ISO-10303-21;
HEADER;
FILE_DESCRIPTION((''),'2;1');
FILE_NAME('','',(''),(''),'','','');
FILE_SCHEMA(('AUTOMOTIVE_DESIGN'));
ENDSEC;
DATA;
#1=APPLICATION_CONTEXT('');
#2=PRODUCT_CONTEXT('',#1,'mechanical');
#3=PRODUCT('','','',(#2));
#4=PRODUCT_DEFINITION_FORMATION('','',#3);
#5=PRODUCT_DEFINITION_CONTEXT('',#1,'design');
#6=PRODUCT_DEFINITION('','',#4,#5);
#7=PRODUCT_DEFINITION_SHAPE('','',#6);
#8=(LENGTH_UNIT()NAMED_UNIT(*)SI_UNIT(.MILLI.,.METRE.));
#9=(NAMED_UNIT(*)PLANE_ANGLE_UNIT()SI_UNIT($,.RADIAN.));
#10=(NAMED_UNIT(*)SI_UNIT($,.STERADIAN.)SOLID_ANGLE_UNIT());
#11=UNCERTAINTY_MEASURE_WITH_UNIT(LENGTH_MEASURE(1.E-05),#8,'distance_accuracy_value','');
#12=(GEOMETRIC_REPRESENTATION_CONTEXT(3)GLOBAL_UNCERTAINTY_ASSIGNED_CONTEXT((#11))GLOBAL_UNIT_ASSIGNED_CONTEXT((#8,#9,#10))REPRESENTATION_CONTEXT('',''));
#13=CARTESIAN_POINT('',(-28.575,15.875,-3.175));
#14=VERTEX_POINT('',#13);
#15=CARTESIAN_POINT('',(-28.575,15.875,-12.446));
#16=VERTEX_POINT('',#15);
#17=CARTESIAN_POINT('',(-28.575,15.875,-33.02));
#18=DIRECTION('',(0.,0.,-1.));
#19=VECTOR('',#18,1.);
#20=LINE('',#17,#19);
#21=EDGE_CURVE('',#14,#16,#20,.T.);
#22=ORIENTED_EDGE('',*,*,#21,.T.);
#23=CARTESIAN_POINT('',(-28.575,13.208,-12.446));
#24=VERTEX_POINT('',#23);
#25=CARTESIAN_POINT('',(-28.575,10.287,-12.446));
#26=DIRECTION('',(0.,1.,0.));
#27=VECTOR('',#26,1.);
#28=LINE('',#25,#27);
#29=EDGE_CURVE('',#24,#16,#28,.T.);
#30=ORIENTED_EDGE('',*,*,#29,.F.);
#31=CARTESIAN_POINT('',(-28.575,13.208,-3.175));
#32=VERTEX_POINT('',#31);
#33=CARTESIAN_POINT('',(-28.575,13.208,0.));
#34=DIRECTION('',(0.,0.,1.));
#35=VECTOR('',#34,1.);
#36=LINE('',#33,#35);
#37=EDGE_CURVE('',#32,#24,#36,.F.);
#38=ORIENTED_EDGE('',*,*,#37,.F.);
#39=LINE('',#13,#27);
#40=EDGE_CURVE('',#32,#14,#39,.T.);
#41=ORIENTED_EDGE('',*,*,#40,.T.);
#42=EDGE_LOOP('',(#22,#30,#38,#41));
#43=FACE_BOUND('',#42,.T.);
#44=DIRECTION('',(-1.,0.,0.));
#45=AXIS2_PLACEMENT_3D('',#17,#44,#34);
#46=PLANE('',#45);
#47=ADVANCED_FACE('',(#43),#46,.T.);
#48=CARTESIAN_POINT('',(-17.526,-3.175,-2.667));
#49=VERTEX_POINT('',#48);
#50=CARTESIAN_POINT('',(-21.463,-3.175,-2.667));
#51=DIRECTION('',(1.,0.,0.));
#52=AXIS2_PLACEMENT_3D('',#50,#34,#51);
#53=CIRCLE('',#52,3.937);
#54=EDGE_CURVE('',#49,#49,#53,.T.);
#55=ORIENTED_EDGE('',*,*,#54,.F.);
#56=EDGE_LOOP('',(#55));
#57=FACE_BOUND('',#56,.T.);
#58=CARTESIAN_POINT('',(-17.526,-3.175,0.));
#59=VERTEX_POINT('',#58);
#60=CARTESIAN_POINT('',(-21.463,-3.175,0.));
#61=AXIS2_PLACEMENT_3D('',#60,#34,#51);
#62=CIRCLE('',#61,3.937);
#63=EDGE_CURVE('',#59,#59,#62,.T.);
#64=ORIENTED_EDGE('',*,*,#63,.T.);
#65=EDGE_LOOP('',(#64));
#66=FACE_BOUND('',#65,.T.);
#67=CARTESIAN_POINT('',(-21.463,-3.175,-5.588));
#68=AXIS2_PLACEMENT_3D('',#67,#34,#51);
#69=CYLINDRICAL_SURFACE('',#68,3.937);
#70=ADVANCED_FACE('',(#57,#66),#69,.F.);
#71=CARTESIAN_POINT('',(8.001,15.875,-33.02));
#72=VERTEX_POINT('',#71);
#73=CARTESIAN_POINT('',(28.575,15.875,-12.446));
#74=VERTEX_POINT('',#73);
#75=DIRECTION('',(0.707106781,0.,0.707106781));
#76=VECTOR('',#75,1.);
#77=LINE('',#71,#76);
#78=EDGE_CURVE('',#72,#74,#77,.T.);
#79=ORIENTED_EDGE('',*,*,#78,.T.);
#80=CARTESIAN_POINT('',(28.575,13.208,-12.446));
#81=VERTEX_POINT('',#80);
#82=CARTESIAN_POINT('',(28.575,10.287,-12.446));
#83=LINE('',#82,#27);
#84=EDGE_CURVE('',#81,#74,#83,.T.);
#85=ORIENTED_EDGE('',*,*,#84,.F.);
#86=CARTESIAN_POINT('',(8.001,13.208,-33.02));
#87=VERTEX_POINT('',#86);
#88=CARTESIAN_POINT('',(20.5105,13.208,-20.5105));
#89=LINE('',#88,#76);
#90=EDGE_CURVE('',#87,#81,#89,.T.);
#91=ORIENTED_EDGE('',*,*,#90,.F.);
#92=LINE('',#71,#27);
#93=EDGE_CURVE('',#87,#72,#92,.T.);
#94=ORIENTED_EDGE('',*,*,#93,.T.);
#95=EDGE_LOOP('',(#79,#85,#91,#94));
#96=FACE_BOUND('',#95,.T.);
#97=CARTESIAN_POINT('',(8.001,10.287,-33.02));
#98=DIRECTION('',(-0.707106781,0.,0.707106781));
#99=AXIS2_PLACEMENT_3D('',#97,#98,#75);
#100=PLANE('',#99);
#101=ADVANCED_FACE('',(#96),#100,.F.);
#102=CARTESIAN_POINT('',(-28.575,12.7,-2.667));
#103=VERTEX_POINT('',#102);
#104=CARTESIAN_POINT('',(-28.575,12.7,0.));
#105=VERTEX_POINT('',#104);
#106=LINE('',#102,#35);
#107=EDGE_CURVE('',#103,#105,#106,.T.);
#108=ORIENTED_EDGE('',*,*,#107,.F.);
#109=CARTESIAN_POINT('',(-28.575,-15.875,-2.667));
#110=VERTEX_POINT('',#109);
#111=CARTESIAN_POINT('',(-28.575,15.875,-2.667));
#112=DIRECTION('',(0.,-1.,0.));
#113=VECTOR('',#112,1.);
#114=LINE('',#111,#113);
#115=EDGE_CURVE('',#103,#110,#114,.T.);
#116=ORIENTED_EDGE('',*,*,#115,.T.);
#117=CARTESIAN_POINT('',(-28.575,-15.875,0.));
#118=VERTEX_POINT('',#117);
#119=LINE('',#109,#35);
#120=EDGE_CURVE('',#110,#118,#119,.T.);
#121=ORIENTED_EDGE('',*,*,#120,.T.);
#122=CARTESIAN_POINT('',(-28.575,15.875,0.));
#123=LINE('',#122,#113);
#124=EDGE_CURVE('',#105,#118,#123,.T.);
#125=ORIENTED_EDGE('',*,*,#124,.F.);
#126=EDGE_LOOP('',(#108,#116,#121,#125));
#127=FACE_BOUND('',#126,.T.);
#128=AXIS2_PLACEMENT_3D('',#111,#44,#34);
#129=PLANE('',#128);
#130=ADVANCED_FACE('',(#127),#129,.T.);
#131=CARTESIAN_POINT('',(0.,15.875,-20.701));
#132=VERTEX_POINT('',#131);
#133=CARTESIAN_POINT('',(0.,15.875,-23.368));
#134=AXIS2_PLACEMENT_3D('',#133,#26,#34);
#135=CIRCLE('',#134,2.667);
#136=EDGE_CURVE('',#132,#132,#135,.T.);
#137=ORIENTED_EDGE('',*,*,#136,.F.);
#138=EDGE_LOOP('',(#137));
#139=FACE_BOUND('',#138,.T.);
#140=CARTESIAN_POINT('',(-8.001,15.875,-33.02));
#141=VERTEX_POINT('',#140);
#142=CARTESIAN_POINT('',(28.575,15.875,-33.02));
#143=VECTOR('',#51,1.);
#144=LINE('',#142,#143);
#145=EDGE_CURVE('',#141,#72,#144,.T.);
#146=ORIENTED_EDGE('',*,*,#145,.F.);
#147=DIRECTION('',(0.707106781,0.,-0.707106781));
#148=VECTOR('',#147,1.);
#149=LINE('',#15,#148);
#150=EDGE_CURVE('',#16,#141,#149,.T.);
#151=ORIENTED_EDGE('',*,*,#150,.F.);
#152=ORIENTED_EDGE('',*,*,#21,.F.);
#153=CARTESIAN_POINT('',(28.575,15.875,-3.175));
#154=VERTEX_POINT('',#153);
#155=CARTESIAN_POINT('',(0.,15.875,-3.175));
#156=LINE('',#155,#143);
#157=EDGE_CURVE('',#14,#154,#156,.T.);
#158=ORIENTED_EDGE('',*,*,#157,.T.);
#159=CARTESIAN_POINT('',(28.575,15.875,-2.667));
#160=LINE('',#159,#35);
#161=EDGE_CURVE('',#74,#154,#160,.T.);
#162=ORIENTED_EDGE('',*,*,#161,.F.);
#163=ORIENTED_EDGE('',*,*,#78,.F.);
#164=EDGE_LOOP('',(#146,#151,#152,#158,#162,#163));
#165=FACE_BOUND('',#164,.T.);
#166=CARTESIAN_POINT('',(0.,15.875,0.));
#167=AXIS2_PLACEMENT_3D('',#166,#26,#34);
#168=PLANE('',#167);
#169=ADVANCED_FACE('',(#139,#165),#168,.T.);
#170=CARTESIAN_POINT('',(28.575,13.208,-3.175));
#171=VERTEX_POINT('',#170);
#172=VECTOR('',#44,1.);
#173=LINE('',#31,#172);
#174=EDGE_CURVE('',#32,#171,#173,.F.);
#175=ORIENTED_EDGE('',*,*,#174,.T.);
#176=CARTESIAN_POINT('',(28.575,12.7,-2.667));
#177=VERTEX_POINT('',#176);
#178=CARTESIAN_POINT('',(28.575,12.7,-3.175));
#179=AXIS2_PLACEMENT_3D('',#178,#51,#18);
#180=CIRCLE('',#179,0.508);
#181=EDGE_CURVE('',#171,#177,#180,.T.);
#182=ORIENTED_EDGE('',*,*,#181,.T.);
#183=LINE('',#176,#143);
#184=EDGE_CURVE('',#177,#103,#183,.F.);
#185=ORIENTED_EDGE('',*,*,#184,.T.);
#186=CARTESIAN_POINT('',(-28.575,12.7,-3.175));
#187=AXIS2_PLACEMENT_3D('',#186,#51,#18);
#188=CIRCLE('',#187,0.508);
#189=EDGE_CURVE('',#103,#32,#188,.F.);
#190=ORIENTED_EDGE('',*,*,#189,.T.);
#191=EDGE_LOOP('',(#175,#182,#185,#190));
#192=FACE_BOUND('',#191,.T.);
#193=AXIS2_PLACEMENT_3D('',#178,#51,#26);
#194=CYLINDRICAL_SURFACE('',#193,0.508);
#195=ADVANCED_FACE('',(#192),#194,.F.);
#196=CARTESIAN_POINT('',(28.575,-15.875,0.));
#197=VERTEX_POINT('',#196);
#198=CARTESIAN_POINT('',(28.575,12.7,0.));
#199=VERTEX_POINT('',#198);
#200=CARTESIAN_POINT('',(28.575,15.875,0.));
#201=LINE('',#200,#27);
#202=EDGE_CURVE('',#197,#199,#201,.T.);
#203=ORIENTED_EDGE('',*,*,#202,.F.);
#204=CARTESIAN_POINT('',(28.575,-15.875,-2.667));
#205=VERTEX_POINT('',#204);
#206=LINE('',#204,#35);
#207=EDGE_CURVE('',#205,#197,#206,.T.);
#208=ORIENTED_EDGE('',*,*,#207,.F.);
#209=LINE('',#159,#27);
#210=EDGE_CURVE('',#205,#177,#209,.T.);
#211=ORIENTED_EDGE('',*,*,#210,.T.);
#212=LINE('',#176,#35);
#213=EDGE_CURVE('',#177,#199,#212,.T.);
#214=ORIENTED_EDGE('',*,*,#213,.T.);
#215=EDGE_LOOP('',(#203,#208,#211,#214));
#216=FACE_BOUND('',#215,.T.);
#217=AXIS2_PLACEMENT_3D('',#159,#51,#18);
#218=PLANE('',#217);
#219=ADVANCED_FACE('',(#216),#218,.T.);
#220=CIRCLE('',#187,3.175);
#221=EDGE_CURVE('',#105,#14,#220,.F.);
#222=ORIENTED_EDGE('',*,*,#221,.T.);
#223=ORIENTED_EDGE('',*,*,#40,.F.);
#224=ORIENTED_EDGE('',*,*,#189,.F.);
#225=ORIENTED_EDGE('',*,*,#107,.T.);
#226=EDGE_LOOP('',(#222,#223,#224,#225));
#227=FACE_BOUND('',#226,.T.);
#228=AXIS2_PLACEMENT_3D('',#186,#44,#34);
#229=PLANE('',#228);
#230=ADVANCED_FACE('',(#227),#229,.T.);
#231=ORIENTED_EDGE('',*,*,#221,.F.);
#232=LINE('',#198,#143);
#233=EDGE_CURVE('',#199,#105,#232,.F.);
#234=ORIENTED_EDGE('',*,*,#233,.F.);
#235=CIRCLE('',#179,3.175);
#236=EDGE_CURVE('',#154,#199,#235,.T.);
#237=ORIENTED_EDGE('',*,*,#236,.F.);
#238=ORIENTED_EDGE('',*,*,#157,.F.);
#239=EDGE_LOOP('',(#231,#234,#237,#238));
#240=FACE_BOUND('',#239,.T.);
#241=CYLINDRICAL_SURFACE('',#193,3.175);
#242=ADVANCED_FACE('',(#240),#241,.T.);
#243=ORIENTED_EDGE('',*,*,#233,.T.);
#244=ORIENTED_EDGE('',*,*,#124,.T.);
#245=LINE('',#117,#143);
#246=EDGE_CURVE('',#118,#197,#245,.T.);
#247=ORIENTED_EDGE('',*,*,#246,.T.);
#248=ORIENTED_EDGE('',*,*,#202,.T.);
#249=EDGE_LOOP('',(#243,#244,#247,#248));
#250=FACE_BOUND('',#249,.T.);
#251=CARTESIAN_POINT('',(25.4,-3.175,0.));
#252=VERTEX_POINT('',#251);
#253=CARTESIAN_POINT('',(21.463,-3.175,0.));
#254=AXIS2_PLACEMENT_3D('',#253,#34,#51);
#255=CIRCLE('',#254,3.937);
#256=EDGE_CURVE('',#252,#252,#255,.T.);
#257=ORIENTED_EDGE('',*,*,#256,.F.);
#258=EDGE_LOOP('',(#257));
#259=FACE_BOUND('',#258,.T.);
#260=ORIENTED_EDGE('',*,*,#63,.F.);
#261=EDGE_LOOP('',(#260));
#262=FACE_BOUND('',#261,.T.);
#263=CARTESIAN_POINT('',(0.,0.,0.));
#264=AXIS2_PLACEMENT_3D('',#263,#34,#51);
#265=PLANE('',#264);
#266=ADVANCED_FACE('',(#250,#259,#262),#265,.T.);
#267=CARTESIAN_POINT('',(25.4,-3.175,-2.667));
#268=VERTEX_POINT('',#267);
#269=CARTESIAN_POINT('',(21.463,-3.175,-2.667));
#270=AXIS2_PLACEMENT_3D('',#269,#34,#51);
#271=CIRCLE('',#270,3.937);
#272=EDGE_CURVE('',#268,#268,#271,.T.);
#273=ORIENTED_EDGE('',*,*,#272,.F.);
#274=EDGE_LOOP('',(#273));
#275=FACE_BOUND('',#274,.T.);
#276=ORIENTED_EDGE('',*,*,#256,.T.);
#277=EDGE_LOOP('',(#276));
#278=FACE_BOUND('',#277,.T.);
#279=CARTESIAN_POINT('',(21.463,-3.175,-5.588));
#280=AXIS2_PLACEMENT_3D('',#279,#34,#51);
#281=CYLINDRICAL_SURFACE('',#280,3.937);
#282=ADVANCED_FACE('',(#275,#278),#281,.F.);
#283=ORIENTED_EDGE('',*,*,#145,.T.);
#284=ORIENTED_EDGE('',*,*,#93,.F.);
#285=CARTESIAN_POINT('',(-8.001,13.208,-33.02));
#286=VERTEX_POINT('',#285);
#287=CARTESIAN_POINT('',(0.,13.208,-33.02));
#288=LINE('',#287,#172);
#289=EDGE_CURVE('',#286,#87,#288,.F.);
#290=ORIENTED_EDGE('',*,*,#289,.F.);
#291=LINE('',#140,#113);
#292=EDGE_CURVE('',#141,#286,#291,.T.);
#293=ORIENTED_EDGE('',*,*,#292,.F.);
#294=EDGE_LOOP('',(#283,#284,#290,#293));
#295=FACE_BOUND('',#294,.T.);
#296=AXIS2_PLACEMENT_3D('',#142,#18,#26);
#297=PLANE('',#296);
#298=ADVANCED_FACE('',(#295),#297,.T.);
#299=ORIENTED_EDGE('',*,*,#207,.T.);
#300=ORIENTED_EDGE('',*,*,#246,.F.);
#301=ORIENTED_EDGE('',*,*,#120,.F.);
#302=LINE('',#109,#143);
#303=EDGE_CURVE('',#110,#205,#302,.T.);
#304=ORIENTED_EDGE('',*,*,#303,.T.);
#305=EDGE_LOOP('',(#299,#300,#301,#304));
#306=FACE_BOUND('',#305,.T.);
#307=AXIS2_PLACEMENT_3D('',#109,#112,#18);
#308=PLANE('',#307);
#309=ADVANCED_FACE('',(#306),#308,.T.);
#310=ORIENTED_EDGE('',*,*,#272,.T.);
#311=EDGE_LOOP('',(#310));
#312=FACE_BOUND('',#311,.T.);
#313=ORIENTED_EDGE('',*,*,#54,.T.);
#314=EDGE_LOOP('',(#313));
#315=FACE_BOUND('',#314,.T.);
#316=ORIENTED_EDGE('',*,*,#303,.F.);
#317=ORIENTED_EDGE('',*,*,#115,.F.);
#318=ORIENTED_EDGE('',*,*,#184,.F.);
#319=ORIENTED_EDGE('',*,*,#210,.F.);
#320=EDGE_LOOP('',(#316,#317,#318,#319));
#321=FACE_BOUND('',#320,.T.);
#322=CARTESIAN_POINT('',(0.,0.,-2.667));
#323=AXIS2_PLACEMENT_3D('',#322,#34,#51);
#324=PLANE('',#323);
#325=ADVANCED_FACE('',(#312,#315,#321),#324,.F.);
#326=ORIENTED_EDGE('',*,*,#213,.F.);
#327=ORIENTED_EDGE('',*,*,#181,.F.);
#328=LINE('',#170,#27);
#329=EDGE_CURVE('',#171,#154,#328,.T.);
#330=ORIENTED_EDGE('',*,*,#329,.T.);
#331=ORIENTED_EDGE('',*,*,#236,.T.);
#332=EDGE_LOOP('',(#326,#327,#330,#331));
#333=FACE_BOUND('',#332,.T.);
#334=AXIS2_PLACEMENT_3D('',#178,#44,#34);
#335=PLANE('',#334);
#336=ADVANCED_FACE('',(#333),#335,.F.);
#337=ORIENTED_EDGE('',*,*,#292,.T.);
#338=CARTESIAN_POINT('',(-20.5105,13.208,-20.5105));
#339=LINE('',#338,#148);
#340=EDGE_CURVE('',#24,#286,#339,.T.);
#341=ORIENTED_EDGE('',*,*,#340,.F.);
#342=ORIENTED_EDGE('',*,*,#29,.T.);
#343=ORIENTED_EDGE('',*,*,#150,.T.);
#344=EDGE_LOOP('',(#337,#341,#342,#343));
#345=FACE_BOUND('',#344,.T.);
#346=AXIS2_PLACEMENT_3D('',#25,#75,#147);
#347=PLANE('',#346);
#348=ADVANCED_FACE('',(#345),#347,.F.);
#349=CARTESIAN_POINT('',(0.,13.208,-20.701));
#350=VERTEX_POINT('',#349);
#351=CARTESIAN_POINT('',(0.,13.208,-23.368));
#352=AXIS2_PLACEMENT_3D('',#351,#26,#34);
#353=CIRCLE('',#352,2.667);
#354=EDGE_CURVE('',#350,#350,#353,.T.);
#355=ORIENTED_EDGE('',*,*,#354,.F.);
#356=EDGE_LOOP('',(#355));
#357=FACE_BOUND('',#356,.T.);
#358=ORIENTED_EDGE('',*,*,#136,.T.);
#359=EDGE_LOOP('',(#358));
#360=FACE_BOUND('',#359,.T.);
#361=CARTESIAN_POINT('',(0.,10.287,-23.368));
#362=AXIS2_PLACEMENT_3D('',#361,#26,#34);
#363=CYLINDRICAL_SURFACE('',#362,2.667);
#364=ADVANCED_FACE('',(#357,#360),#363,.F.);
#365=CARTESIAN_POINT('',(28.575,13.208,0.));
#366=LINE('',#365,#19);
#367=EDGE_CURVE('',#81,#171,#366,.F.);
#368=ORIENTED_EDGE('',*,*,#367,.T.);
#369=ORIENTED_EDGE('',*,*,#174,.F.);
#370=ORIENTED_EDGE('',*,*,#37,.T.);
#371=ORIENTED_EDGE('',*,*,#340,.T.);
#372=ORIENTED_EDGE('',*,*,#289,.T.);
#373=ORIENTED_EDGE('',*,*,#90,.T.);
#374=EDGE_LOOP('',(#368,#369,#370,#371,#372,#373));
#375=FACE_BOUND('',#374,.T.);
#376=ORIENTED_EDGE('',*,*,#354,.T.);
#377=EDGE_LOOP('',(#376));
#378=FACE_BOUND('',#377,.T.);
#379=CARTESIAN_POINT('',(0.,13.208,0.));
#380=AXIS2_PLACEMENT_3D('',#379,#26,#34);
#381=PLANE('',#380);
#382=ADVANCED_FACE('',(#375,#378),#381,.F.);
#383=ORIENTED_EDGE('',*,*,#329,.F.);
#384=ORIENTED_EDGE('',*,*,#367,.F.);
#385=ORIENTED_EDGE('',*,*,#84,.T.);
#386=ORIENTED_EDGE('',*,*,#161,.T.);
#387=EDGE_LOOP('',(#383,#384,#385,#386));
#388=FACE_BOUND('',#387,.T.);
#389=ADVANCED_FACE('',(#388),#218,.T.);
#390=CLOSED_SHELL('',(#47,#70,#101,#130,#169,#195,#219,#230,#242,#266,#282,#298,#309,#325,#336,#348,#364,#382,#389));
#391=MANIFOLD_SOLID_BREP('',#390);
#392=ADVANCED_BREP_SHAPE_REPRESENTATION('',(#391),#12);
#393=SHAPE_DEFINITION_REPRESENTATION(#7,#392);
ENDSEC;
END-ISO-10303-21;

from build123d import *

# Parameters (mm, degrees)
CROQUIS1_W                       = 57.15
CROQUIS1_H                       = 31.75
BRIDA_BASE1_DEPTH                = 2.667
BRIDA_DE_ARISTA1_STRIP_W         = 11.684
BRIDA_DE_ARISTA1_STRIP_H         = 2.667
BRIDA_DE_ARISTA1_STRIP_CUT_DEPTH = 57.15
BRIDA_DE_ARISTA1_DEPTH           = 57.15
CROQUIS9_R                       = 3.937
CORTAR_EXTRUIR1_DEPTH            = 5.588
CROQUIS10_R                      = 2.667
CORTAR_EXTRUIR2_DEPTH            = 5.588


# Sheet-metal steps are written as plain solids
with BuildPart() as part:
    # Croquis1 → Brida base1 (new body)
    with BuildSketch(Plane.XY):
        Rectangle(CROQUIS1_W, CROQUIS1_H)
    extrude(amount=-BRIDA_BASE1_DEPTH)

    # Brida de arista1 strip (across the edge) → Brida de arista1 strip cut (cut)
    with BuildSketch(Plane(origin=(-28.575, 15.875, -2.667), x_dir=(0, -1, 0), z_dir=(1, 0, 0))):
        with Locations((-2.667, -1.3335)):
            Rectangle(BRIDA_DE_ARISTA1_STRIP_W, BRIDA_DE_ARISTA1_STRIP_H)
    extrude(amount=BRIDA_DE_ARISTA1_STRIP_CUT_DEPTH, mode=Mode.SUBTRACT)

    # Brida de arista1 section (across the edge) → Brida de arista1 (add)
    with BuildSketch(Plane(origin=(-28.575, 15.875, -2.667), x_dir=(0, -1, 0), z_dir=(1, 0, 0))):
        with BuildLine():
            Line((0, 0.508), (0, 30.353))
            Line((0, 30.353), (2.667, 30.353))
            Line((2.667, 30.353), (2.667, 0.508))
            ThreePointArc((2.667, 0.508), (2.815789755, 0.148789755), (3.175, 0))
            Line((3.175, 0), (3.175, -2.667))
            ThreePointArc((3.175, -2.667), (0.92993597, -1.73706403), (0, 0.508))
        make_face()
    extrude(amount=BRIDA_DE_ARISTA1_DEPTH)

    # Croquis9 → Cortar-Extruir1 (cut)
    with BuildSketch(Plane.XY):
        with Locations((-21.463, -3.175)):
            Circle(CROQUIS9_R)
        with Locations((21.463, -3.175)):
            Circle(CROQUIS9_R)
    extrude(amount=-CORTAR_EXTRUIR1_DEPTH, mode=Mode.SUBTRACT)

    # Croquis10 → Cortar-Extruir2 (cut)
    with BuildSketch(Plane(origin=(0, 15.875, 0), x_dir=(1, 0, 0), z_dir=(0, 1, 0))):
        with Locations(Location((0, 23.368, 0), (0, 0, 270))):
            Circle(CROQUIS10_R)
        Polygon((-28.575, 33.02), (-8.001, 33.02), (-28.575, 12.446), align=None)
        Polygon((28.575, 33.02), (8.001, 33.02), (28.575, 12.446), align=None)
    extrude(amount=-CORTAR_EXTRUIR2_DEPTH, mode=Mode.SUBTRACT)


solid = part.part
